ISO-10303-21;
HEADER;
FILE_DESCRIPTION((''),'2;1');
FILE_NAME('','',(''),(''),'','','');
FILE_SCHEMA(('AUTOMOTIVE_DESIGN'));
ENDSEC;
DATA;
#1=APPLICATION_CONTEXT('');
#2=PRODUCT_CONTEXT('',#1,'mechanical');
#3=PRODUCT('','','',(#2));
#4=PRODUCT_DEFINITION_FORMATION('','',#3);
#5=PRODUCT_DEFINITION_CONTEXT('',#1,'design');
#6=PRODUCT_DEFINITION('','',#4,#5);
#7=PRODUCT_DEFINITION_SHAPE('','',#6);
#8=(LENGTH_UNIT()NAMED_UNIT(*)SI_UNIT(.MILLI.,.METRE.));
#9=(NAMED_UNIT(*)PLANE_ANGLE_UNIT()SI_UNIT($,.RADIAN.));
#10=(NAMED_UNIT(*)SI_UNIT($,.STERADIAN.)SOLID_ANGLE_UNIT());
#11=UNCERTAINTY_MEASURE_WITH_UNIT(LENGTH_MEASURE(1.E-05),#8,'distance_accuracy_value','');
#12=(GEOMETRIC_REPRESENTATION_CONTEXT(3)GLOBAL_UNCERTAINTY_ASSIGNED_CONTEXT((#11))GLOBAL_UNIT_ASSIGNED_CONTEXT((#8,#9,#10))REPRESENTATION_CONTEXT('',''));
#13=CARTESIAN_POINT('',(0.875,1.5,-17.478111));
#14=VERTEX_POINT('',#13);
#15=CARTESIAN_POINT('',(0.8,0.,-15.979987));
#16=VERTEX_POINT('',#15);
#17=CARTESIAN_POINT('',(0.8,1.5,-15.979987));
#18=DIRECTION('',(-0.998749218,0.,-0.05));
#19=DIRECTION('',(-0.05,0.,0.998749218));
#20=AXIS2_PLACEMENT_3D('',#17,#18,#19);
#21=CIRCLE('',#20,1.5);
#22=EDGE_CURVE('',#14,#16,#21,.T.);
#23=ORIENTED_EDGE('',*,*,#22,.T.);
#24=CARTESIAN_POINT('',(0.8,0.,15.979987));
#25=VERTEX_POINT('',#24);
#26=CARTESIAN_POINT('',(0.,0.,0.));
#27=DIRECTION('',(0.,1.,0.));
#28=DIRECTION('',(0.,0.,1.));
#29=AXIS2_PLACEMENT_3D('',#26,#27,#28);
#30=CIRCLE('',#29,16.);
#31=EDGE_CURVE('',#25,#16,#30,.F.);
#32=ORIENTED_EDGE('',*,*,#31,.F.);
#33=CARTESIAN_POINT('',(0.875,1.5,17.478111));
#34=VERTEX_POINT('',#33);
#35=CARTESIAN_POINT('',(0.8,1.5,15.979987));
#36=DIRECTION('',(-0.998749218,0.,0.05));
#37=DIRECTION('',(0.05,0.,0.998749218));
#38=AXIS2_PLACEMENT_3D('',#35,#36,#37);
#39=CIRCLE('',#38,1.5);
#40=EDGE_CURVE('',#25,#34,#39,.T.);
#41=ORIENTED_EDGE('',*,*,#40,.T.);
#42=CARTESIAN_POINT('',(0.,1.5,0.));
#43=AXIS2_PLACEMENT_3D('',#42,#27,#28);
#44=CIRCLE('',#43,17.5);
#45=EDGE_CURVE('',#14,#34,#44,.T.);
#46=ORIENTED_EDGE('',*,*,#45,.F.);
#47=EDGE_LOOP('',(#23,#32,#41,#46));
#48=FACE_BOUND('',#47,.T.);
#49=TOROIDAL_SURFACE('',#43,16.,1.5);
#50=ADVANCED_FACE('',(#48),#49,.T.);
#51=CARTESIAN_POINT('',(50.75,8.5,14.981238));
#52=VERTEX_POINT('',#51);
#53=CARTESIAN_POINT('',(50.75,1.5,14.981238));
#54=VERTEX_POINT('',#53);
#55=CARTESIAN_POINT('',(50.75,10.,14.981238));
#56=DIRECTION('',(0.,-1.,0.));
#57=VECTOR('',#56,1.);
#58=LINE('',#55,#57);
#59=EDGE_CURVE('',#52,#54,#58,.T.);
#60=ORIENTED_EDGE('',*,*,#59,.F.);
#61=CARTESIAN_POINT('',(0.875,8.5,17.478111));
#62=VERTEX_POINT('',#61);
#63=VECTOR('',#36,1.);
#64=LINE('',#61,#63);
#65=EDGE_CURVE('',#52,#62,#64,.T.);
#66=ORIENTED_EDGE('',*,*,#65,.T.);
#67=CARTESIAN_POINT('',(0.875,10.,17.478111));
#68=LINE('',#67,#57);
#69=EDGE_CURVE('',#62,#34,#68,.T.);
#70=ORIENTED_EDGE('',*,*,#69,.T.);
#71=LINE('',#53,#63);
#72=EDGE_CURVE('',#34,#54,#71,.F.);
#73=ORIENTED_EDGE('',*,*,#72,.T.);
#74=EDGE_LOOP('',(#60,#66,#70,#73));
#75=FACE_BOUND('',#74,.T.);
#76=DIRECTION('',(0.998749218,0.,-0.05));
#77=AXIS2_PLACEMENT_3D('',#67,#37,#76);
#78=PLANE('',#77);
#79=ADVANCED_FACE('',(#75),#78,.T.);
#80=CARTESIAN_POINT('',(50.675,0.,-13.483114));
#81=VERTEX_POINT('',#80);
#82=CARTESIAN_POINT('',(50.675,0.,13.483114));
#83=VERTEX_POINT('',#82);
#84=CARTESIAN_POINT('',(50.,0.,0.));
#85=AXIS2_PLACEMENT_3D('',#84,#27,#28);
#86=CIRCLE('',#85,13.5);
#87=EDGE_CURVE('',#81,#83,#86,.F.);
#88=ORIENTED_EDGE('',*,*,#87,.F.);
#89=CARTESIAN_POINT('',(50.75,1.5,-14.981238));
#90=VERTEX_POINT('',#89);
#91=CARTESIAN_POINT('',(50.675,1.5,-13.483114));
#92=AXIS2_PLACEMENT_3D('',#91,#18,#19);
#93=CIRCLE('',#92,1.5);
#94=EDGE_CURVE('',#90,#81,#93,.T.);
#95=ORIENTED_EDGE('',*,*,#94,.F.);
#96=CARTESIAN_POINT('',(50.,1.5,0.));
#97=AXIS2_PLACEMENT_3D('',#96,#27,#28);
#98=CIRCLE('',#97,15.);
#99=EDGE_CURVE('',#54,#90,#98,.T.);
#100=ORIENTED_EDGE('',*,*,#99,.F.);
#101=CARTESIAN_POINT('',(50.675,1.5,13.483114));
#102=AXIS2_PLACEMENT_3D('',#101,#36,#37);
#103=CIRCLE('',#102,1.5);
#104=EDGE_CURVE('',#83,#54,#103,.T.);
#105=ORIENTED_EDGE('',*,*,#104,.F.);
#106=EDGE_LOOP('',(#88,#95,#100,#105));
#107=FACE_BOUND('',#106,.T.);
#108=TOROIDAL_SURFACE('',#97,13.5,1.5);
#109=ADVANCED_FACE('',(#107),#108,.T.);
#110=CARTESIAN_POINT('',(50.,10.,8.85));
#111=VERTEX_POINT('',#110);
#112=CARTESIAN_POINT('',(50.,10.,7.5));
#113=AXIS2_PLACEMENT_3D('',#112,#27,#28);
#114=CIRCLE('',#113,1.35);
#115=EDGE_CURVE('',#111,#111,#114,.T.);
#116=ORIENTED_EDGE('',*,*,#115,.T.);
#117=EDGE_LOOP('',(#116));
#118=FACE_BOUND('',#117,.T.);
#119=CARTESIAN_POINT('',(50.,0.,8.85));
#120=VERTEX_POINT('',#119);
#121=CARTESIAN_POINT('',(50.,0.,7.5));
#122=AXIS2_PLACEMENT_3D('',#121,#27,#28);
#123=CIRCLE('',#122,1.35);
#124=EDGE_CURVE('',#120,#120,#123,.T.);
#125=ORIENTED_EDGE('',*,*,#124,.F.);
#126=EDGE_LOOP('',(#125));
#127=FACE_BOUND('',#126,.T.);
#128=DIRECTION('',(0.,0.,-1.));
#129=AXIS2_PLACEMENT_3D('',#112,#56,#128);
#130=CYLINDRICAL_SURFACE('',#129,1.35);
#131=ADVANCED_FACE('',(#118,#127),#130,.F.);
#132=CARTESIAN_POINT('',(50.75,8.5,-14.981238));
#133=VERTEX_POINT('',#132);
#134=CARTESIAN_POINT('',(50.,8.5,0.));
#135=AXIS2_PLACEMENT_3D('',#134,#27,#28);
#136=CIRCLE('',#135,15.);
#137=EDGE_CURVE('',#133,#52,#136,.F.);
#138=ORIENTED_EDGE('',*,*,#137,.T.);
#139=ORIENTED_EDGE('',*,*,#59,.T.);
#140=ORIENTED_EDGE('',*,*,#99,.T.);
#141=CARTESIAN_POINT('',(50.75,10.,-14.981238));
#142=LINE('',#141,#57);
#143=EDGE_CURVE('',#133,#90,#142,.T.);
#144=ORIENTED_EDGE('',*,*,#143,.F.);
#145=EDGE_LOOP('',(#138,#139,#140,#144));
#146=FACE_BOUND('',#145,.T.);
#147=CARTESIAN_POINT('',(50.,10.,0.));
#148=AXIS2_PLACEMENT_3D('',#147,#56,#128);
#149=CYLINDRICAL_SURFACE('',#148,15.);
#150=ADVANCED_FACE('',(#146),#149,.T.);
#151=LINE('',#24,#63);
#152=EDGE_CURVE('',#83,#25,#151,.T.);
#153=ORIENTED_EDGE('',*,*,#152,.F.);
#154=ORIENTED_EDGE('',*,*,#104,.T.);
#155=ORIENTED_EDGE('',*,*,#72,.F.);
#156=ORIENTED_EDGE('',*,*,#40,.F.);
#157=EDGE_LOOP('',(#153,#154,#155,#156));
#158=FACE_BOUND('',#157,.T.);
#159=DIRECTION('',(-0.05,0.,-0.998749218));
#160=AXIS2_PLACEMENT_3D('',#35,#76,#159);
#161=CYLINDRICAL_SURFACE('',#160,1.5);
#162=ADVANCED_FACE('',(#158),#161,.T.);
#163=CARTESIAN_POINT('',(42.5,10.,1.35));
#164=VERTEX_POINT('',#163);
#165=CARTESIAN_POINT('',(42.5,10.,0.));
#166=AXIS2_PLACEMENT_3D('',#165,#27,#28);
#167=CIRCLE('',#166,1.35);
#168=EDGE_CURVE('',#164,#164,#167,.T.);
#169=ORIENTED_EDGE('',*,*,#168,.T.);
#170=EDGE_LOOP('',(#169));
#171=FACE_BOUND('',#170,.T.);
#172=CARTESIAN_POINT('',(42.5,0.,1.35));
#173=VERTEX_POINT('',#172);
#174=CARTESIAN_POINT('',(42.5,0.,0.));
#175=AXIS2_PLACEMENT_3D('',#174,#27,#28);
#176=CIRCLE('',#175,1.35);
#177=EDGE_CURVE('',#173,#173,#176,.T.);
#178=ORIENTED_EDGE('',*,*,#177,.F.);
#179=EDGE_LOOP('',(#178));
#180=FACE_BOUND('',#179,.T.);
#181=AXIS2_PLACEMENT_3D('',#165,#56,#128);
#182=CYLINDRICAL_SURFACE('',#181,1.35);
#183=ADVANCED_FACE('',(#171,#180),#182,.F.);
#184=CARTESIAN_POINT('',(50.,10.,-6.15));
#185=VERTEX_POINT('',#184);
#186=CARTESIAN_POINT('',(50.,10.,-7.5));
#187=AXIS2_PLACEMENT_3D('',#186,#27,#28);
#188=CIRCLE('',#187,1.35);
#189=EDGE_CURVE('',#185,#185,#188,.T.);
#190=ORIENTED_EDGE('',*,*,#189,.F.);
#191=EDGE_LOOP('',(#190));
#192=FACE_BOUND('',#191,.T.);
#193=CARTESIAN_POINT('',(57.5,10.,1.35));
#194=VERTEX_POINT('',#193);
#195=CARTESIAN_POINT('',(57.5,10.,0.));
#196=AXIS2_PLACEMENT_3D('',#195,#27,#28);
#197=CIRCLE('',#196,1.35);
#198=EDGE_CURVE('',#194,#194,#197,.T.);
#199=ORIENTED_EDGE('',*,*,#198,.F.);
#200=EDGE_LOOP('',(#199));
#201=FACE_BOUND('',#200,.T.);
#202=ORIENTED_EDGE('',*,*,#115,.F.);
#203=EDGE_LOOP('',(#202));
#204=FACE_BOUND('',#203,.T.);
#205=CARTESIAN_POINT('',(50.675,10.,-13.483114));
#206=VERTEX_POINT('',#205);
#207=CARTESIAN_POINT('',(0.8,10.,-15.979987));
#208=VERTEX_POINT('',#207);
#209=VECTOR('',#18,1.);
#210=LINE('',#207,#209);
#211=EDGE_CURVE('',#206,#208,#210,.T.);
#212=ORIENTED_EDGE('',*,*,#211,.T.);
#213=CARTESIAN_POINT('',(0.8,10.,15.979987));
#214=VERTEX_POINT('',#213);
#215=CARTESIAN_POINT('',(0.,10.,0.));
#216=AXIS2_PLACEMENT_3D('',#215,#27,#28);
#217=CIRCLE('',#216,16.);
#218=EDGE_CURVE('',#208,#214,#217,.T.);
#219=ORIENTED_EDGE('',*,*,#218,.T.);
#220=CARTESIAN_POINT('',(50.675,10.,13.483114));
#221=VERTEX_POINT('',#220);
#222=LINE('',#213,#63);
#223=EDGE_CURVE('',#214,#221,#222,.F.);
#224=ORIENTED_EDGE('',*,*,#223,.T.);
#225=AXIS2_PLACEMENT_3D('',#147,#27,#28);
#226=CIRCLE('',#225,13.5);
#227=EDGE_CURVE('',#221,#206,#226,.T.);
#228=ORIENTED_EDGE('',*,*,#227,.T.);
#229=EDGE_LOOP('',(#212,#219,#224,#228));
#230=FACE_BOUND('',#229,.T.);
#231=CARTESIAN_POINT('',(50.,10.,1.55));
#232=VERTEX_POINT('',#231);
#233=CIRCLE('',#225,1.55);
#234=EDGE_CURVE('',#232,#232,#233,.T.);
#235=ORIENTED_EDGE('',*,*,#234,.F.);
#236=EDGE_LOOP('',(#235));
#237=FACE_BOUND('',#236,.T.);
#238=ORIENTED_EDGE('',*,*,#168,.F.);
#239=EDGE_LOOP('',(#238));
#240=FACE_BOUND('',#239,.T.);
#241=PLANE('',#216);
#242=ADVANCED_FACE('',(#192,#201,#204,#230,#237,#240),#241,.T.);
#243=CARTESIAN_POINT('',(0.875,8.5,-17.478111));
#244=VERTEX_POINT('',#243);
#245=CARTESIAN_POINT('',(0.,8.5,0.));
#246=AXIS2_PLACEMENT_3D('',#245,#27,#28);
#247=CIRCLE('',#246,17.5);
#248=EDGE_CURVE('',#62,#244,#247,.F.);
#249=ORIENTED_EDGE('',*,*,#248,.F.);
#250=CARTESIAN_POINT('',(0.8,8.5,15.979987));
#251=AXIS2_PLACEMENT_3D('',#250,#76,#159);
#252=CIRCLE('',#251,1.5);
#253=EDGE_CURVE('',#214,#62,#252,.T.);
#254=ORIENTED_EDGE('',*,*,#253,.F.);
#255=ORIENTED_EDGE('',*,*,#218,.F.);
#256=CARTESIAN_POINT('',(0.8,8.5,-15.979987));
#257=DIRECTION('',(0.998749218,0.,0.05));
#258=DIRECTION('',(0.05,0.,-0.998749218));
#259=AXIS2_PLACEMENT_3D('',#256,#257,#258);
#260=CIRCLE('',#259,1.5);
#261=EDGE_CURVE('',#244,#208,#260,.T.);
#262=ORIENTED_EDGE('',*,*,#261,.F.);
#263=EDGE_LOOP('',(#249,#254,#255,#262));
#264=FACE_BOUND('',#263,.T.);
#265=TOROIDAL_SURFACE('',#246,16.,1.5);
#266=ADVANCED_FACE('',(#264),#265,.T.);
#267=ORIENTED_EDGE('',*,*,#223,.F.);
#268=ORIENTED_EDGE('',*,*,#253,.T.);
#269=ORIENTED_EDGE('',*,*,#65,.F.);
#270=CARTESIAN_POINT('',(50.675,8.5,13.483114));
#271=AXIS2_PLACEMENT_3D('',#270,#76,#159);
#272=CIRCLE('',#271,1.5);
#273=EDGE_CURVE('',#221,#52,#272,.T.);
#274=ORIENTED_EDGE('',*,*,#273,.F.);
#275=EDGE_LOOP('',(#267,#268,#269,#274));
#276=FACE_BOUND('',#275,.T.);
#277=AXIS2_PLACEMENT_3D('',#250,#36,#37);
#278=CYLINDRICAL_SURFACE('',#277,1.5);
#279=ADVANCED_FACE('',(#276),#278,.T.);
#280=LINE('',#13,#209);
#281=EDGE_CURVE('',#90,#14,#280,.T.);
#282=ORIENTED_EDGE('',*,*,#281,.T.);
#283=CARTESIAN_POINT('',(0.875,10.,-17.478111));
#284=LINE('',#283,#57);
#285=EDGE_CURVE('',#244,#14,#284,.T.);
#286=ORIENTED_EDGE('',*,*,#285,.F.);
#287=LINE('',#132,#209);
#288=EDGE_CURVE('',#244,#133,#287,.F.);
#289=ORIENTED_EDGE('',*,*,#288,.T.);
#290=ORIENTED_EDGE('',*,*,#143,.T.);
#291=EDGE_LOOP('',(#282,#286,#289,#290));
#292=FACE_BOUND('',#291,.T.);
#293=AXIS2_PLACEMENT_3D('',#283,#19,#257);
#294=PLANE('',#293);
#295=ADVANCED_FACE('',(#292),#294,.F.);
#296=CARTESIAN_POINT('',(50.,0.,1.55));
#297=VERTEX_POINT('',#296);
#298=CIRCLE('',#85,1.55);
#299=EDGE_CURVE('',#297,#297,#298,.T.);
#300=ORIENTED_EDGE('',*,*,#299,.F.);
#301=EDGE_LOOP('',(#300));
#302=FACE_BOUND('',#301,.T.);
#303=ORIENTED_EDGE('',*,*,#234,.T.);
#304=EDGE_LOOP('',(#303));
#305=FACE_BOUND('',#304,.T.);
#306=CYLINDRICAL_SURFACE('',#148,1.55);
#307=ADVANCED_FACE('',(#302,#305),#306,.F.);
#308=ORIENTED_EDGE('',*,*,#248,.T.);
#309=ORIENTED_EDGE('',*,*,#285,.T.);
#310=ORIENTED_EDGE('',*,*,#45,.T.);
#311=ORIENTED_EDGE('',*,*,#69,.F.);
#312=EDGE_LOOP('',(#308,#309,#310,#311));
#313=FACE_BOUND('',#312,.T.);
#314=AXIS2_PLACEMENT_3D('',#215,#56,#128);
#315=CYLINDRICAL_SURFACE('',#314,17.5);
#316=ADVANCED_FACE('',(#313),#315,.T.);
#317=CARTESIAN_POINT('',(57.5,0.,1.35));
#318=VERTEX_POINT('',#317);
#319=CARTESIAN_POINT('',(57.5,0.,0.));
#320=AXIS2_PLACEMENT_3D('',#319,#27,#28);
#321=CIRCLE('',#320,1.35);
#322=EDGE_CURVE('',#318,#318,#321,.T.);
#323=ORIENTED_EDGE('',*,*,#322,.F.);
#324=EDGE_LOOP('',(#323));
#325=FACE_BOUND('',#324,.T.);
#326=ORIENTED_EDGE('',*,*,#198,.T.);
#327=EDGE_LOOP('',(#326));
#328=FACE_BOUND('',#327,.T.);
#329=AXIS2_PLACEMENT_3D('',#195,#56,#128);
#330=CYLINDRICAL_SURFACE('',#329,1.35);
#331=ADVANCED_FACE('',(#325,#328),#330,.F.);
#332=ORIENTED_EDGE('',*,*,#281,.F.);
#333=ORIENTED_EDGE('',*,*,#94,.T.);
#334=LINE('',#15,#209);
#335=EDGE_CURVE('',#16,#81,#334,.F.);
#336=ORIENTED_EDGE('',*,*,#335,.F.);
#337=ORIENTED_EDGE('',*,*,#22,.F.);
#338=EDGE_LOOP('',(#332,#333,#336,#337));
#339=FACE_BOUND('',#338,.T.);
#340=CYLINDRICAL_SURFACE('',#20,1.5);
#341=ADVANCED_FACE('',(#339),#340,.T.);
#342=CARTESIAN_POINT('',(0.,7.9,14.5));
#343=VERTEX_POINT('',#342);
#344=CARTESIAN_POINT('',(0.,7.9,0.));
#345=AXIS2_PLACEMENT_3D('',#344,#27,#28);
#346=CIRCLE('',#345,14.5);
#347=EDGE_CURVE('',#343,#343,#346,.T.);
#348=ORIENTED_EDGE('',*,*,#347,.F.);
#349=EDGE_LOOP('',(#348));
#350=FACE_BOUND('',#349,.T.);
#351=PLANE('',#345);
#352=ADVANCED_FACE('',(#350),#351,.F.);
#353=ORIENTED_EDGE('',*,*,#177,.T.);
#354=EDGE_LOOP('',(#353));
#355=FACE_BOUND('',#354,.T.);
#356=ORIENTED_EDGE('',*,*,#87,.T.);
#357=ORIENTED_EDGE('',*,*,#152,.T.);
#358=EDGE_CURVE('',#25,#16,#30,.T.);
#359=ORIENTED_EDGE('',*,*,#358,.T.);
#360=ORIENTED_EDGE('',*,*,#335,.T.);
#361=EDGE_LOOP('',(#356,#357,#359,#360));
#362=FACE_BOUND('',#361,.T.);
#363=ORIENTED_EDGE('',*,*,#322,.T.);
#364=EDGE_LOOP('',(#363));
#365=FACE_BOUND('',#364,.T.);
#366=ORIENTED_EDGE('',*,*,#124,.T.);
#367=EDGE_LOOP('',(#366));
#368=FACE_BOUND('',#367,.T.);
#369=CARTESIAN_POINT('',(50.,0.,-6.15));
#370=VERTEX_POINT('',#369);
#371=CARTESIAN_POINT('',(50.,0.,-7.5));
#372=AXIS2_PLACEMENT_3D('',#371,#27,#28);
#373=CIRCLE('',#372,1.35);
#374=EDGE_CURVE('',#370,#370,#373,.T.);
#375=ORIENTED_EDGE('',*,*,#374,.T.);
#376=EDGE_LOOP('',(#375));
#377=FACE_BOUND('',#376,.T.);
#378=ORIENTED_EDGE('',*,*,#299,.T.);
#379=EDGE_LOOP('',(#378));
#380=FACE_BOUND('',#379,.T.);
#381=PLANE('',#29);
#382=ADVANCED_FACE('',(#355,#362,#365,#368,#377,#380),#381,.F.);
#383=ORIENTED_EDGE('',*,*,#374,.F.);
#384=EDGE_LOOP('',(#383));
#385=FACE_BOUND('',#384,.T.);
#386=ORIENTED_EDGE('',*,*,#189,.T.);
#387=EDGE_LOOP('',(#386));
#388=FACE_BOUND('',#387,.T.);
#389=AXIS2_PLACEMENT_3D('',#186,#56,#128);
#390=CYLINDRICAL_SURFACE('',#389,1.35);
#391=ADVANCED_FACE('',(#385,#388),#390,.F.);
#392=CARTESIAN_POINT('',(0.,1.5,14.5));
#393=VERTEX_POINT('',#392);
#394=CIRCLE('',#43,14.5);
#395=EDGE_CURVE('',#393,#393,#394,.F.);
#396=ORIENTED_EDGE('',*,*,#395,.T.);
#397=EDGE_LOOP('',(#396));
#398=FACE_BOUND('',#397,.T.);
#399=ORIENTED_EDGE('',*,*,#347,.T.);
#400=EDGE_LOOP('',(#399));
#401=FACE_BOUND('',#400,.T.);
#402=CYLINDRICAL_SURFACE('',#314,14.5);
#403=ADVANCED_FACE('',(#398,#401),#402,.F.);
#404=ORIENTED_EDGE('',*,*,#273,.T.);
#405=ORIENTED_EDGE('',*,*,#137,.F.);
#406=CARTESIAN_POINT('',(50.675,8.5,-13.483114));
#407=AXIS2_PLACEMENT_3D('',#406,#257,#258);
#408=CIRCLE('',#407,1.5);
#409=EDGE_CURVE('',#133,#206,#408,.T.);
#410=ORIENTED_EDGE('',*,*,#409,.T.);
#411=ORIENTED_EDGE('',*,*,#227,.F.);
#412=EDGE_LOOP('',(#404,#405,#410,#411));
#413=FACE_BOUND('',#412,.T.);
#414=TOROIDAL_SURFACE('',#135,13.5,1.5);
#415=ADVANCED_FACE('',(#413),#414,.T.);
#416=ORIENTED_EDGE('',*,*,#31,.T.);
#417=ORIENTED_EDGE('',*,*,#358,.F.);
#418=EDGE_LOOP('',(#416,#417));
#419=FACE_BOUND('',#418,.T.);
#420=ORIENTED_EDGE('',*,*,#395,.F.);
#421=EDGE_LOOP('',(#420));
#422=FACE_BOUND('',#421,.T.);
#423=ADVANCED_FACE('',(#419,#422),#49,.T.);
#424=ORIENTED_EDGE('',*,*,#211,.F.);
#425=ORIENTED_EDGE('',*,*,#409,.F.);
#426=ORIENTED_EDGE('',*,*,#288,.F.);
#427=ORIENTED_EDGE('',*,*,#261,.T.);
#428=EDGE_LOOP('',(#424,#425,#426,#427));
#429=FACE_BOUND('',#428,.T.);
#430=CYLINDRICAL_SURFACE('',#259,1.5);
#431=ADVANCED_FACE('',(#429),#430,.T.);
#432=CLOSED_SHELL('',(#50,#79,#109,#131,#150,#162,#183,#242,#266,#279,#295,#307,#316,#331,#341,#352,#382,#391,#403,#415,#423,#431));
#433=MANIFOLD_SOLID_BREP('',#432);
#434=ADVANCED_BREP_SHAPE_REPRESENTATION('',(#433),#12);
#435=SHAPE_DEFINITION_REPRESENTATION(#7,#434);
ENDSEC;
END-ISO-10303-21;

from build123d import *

# Parameters (mm, degrees)
SKETCH1_R           = 14.5
SKETCH1_R_2         = 1.35
SKETCH1_R_3         = 1.55
BOSS_EXTRUDE1_DEPTH = 10
BOSS_EXTRUDE2_START = -2.1
SKETCH2_R           = 14.5
BOSS_EXTRUDE2_DEPTH = 2.1
FILLET1_R           = 1.5


with BuildPart() as part:
    # Sketch1 → Boss-Extrude1 (new body)
    with BuildSketch(Plane(origin=(0, 0, 0), x_dir=(1, 0, 0), z_dir=(0, 1, 0))):
        with BuildLine():
            ThreePointArc((0.875, 17.478111311), (-17.5, 0), (0.875, -17.478111311))
            Line((0.875, -17.478111311), (50.75, -14.981238267))
            ThreePointArc((50.75, -14.981238267), (65, 0), (50.75, 14.981238267))
            Line((50.75, 14.981238267), (0.875, 17.478111311))
        make_face()
        with Locations(Location((0, 0, 0), (0, 0, 270))):
            Circle(SKETCH1_R, mode=Mode.SUBTRACT)
        with Locations(Location((50, -7.5, 0), (0, 0, 270))):
            Circle(SKETCH1_R_2, mode=Mode.SUBTRACT)
        with BuildLine():
            ThreePointArc((43.85, 0), (42.5, -1.35), (41.15, 0))
            ThreePointArc((41.15, 0), (42.5, 1.35), (43.85, 0))
        make_face(mode=Mode.SUBTRACT)
        with Locations(Location((50, 0, 0), (0, 0, 270))):
            Circle(SKETCH1_R_3, mode=Mode.SUBTRACT)
        with Locations(Location((57.5, 0, 0), (0, 0, 270))):
            Circle(SKETCH1_R_2, mode=Mode.SUBTRACT)
        with Locations(Location((50, 7.5, 0), (0, 0, 270))):
            Circle(SKETCH1_R_2, mode=Mode.SUBTRACT)
    extrude(amount=BOSS_EXTRUDE1_DEPTH)

    # Sketch2 → Boss-Extrude2 (add)
    with BuildSketch(Plane(origin=(0, 10, 0), x_dir=(1, 0, 0), z_dir=(0, 1, 0)).offset(BOSS_EXTRUDE2_START)):
        with Locations(Location((0, 0, 0), (0, 0, 270))):
            Circle(SKETCH2_R)
    extrude(amount=BOSS_EXTRUDE2_DEPTH)

    # Fillet1
    fillet1_edges = [part.edges().sort_by_distance(p)[0] for p in [
        (25.8125, 10, -16.229674789),
        (0, 0, -14.5),
        (65, 0, 0),
        (-17.5, 10, 0),
        (25.8125, 0, 16.229674789),
        (-17.5, 0, 0),
        (25.8125, 0, -16.229674789),
        (25.8125, 10, 16.229674789),
        (65, 10, 0),
    ]]
    fillet(fillet1_edges, radius=FILLET1_R - 0.0001)  # a hair under: the kernel refuses the full size


solid = part.part
